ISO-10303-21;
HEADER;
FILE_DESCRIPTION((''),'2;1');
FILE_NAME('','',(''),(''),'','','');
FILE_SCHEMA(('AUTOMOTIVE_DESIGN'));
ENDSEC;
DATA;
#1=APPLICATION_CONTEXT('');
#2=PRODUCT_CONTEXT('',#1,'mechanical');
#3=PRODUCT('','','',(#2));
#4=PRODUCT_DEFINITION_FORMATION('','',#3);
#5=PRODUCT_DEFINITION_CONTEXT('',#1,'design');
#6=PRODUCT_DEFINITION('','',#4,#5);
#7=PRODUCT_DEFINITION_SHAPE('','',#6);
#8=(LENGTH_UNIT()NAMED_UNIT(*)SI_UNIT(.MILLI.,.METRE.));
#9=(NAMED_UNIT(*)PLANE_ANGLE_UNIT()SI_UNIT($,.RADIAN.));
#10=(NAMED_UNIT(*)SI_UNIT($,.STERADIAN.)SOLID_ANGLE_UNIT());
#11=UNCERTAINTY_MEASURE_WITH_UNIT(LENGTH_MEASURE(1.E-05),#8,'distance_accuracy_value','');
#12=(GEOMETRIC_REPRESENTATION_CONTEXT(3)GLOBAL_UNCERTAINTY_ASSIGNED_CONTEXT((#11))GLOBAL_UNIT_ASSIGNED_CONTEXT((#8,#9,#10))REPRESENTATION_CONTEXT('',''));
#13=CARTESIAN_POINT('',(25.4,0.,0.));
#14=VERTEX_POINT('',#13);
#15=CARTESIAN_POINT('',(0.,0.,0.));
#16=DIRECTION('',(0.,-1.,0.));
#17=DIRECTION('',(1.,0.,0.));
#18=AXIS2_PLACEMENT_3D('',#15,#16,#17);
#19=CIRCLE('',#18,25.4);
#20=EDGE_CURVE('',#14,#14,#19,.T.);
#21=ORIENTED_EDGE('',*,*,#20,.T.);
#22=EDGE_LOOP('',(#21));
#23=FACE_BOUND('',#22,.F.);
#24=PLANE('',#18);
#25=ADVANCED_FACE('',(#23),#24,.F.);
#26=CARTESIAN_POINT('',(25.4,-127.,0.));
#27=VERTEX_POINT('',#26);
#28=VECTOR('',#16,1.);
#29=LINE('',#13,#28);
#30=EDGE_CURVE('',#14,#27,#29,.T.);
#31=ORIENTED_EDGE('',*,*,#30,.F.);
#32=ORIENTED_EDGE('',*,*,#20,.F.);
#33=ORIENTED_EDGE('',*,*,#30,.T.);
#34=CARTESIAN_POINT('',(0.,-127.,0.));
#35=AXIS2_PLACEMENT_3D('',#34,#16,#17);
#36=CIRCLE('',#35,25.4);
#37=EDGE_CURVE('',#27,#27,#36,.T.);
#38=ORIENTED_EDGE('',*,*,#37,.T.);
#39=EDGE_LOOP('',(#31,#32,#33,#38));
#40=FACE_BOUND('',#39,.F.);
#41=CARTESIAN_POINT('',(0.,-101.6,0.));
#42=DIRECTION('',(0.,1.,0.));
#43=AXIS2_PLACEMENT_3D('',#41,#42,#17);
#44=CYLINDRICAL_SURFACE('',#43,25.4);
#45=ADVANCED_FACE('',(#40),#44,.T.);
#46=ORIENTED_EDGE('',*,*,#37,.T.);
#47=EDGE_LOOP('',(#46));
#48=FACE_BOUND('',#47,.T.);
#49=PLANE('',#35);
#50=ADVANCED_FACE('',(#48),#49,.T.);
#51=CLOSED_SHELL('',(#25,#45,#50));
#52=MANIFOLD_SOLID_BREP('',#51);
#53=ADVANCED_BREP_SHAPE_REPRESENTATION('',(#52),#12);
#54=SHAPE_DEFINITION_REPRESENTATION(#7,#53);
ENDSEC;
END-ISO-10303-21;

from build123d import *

# Parameters (mm, degrees)
F0_R     = 25.4
F1_DEPTH = 101.6
F3_DEPTH = 25.4


# Not quite as in the source:
# - the program builds the solid bodies; features that only make, move or delete a surface that nothing else refers to are left out


with BuildPart() as f1:
    # F0 (on Front) → F1 (new body)
    with BuildSketch(Plane.XZ):
        Circle(F0_R)
    extrude(amount=F1_DEPTH)

    # F3 (add): a face of the model
    f3_faces = [f1.faces().sort_by_distance(p)[0] for p in [
        (0, -101.6, 0),
    ]]
    extrude(f3_faces, amount=F3_DEPTH)


solid = f1.part
